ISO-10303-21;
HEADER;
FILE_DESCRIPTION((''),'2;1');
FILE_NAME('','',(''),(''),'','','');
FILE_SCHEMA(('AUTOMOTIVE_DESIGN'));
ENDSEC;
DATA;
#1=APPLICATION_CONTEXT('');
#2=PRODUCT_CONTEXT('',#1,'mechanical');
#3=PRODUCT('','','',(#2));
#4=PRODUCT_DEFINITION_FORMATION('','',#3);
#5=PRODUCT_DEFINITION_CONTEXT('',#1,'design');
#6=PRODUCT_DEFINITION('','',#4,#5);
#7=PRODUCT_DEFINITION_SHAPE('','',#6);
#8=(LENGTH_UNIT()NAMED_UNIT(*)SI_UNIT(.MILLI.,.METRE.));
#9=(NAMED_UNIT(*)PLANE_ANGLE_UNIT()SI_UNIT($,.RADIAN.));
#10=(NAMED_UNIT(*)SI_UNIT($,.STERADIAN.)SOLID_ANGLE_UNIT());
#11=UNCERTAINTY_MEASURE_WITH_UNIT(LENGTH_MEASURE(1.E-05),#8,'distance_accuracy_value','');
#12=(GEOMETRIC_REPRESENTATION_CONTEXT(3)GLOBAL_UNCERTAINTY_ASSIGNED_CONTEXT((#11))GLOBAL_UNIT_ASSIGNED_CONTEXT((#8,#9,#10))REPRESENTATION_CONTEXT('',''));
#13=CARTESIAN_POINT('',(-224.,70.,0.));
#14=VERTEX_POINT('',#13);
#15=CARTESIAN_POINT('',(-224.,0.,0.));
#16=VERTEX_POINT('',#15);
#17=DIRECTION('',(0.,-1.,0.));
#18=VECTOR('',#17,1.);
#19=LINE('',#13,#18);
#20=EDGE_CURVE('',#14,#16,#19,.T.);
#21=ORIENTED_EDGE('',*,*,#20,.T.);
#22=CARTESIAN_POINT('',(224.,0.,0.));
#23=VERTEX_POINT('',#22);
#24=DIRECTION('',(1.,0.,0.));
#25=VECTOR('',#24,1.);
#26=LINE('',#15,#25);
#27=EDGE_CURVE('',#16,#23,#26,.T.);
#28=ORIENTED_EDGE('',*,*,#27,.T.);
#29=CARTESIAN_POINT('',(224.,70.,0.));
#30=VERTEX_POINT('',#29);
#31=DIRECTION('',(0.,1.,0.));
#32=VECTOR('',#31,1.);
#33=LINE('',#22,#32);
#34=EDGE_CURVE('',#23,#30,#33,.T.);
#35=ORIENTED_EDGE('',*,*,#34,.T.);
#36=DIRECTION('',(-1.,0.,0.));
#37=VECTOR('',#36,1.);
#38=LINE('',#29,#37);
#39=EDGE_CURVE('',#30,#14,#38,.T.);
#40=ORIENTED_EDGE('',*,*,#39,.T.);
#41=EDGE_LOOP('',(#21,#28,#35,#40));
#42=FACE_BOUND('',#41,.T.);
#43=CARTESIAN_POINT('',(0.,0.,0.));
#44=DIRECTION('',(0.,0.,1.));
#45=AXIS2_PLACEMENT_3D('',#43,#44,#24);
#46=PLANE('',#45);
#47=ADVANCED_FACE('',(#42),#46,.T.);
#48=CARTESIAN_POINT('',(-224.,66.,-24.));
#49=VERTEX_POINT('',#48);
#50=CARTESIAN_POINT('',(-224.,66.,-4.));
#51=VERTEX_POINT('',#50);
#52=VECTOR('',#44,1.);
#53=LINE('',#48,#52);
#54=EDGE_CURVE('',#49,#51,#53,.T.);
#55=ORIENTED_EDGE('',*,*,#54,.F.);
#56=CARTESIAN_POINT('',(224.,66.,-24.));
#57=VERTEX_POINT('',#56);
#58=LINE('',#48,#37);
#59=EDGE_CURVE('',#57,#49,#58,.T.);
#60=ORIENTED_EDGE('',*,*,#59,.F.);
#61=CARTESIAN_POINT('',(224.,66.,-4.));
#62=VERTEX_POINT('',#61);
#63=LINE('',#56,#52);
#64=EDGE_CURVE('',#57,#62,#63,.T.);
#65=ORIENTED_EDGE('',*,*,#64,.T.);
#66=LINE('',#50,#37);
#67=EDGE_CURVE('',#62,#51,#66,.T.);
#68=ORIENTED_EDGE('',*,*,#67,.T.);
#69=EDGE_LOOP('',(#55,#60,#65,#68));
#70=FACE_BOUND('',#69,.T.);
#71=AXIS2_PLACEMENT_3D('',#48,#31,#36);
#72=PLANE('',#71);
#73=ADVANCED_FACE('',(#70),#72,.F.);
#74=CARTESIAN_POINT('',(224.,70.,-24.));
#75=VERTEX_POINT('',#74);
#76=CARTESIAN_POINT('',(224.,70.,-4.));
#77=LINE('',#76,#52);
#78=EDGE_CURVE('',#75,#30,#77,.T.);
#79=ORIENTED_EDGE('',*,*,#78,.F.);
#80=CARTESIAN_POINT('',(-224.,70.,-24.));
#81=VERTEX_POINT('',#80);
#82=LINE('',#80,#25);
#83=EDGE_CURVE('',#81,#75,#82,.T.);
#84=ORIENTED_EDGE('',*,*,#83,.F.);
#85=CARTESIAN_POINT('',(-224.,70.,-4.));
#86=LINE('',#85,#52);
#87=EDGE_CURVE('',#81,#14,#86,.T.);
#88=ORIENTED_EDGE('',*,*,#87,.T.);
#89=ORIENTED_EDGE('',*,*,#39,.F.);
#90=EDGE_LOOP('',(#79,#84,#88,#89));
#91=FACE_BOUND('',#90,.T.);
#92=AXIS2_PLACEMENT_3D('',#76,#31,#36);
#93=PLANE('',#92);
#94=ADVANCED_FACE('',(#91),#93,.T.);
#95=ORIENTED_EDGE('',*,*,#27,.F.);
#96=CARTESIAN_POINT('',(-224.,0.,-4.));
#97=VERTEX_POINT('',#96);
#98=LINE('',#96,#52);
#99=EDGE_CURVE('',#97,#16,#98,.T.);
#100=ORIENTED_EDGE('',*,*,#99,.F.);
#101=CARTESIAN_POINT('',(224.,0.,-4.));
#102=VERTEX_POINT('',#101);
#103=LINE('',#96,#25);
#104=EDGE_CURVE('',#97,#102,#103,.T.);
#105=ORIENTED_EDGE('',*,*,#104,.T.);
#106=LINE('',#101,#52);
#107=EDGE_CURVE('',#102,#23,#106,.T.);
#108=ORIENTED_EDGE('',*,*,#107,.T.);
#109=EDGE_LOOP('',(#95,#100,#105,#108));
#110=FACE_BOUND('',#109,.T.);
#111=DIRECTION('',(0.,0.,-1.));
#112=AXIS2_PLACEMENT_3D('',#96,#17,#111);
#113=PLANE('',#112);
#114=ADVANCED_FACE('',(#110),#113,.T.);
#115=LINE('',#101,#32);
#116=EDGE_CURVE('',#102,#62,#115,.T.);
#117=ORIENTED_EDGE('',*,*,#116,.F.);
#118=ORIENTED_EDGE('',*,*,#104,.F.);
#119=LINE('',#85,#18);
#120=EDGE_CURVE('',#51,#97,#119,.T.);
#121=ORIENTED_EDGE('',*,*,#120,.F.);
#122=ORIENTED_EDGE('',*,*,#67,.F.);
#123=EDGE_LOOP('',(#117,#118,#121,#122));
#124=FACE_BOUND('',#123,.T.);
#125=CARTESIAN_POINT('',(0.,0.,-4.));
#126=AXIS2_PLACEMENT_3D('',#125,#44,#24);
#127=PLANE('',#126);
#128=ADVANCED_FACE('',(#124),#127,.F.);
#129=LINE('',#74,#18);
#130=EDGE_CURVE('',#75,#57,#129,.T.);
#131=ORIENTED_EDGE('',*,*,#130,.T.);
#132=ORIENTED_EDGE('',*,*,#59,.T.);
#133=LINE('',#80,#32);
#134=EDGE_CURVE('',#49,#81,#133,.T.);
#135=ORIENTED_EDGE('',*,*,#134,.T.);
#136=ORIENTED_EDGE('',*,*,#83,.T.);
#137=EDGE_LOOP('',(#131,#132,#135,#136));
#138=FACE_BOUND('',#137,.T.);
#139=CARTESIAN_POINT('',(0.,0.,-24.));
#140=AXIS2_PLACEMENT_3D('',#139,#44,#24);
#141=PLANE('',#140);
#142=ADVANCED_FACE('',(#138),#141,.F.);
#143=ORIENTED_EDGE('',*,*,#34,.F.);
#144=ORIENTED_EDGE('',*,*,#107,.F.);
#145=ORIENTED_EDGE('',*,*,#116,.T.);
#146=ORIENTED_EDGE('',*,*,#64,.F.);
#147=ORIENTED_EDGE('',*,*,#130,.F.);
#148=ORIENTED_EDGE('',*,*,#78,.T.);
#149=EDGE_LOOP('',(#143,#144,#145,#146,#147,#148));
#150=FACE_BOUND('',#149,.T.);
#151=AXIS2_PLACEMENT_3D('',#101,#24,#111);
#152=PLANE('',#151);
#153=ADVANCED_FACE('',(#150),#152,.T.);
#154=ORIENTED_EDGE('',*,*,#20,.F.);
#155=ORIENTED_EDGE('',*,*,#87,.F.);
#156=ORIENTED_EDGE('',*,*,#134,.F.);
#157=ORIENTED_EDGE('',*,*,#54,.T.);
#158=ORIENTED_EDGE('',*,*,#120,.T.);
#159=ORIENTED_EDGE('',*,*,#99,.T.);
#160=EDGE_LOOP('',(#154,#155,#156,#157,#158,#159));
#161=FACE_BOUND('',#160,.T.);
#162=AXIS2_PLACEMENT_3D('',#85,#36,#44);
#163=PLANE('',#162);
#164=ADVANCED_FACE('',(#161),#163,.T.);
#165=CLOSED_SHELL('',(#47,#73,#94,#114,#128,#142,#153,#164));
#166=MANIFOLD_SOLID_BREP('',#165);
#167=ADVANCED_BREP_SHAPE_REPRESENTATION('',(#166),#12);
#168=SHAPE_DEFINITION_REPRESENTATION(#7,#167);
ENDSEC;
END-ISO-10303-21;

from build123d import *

# Parameters (mm, degrees)
SKETCH1_W           = 448
SKETCH1_H           = 70
BASE_FLANGE1_DEPTH  = 4
SKETCH6_W           = 448
SKETCH6_H           = 4
BOSS_EXTRUDE1_DEPTH = 20


# Sheet-metal steps are written as plain solids
with BuildPart() as part:
    # Sketch1 → Base-Flange1 (new body)
    with BuildSketch(Plane.XY):
        with Locations((0, 35)):
            Rectangle(SKETCH1_W, SKETCH1_H)
    extrude(amount=-BASE_FLANGE1_DEPTH)

    # Sketch6 → Boss-Extrude1 (add)
    with BuildSketch(Plane(origin=(0, 0, -4), x_dir=(-1, 0, 0), z_dir=(0, 0, -1))):
        with Locations((0, 68)):
            Rectangle(SKETCH6_W, SKETCH6_H)
    extrude(amount=BOSS_EXTRUDE1_DEPTH)


solid = part.part
